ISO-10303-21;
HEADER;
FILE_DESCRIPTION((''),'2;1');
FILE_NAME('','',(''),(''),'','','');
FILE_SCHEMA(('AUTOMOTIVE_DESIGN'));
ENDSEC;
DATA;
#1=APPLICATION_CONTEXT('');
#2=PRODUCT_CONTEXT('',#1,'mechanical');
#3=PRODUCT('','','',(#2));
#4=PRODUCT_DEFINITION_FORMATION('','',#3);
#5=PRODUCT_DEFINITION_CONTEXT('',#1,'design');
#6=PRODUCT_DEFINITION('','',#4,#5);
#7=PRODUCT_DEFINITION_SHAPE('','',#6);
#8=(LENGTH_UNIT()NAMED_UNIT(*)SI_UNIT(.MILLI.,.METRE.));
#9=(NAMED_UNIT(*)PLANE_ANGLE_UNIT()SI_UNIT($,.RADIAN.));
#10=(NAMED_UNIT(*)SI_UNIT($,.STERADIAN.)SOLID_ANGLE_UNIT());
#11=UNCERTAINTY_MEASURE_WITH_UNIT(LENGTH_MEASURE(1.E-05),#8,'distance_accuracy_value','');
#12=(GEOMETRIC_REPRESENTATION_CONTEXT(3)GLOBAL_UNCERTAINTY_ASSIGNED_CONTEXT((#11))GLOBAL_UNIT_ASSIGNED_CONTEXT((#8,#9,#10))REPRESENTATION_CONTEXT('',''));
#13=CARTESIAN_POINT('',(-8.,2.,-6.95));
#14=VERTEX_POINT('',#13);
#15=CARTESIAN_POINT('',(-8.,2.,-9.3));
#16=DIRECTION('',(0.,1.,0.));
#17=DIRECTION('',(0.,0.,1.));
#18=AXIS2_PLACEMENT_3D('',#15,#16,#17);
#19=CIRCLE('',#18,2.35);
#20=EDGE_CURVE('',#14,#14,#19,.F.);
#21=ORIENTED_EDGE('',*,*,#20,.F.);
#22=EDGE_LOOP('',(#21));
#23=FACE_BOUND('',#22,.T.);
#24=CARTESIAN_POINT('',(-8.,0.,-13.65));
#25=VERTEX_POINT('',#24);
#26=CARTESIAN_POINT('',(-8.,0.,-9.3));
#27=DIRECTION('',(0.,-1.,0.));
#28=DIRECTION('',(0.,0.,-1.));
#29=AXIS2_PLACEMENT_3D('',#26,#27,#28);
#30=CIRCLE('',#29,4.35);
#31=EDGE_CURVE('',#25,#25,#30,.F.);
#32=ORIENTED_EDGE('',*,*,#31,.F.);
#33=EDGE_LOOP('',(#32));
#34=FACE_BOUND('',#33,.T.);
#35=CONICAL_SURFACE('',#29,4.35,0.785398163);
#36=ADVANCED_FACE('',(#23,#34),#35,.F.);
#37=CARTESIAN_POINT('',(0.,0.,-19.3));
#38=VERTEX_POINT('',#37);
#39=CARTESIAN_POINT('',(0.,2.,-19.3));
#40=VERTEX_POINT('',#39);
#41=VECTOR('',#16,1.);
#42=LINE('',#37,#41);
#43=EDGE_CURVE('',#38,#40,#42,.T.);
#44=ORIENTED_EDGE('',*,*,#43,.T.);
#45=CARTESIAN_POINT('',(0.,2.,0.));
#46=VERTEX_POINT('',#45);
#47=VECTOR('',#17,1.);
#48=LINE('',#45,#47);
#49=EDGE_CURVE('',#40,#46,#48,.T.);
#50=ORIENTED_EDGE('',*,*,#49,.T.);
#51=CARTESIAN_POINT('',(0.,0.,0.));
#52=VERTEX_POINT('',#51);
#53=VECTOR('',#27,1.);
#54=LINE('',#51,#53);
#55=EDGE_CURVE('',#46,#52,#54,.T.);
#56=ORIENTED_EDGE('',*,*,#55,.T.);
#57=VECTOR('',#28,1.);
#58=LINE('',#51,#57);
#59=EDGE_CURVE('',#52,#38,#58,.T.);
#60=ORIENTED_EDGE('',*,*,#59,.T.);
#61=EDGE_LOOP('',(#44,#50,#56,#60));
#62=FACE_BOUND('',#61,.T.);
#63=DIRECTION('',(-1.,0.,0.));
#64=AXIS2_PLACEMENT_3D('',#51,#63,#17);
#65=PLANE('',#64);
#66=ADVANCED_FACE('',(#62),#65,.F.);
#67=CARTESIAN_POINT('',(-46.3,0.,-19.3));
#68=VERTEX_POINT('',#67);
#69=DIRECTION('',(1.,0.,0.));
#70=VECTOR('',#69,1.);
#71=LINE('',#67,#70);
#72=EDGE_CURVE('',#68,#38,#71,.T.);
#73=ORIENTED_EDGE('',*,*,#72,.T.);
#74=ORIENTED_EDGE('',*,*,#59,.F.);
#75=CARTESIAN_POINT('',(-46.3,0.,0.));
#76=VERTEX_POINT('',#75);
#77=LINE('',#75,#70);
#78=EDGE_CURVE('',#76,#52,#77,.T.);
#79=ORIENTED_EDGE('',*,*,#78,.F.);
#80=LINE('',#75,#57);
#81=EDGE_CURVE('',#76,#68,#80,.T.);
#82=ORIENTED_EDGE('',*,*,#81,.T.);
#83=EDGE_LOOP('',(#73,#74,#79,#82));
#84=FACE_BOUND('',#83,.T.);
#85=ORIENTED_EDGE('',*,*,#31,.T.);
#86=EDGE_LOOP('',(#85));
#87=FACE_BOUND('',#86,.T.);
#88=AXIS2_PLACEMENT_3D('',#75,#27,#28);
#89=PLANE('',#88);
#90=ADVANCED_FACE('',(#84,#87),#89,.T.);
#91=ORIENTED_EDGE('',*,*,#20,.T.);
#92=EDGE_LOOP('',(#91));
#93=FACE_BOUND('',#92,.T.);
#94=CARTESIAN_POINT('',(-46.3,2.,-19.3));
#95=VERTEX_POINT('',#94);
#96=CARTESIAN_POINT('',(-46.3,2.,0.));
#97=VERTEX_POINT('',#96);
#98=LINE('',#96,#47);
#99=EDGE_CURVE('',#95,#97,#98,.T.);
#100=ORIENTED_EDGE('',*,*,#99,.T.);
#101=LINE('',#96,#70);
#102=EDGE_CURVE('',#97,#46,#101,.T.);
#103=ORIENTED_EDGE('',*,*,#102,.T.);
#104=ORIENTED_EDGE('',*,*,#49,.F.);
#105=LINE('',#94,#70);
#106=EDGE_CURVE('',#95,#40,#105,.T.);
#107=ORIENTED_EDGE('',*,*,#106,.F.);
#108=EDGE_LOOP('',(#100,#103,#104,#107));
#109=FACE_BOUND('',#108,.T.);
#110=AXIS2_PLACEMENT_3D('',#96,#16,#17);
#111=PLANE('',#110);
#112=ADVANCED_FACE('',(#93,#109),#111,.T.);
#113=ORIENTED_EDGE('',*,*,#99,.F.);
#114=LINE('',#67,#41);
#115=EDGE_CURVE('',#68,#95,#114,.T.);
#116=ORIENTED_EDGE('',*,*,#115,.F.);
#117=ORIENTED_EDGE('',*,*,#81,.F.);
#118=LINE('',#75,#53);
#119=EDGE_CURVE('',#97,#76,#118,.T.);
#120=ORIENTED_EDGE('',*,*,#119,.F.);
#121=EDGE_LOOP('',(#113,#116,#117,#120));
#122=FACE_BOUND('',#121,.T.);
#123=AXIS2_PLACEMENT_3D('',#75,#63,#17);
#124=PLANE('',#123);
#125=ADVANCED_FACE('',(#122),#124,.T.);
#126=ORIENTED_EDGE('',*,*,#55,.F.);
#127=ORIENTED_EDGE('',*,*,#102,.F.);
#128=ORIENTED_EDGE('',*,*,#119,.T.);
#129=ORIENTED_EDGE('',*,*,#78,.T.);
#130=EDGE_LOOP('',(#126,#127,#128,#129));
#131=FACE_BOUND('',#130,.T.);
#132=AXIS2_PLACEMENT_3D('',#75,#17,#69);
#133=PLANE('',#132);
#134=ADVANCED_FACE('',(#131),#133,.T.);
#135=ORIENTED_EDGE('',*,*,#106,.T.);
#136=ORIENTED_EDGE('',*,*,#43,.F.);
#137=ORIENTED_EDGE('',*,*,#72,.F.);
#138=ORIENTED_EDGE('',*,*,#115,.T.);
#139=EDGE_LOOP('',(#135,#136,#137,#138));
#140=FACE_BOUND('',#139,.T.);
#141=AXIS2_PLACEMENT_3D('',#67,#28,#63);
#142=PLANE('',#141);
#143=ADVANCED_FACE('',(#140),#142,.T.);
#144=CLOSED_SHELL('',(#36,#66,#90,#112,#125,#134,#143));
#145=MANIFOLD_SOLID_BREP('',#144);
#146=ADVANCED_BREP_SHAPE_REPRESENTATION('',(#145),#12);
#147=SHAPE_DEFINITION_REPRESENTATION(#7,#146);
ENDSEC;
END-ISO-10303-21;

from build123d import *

# Parameters (mm, degrees)
SKETCH_1_W             = 19.3
SKETCH_1_H             = 2
SM_BASE_FLANGE_1_DEPTH = 46.3
SKETCH_7_R             = 2.3
CUT_EXTRUDE_2_DEPTH    = 51.201394403
CHAMFER_2_SIZE         = 2.05


# Sheet-metal steps are written as plain solids
with BuildPart() as part:
    # Sketch 1 → Базовая кромка1 (new body)
    with BuildSketch(Plane(origin=(0, 0, 0), x_dir=(0, 0, -1), z_dir=(1, 0, 0))):
        with Locations((9.65, 1)):
            Rectangle(SKETCH_1_W, SKETCH_1_H)
    extrude(amount=-SM_BASE_FLANGE_1_DEPTH)

    # Эскиз7 → Вырез-Вытянуть2 (cut, through all)
    with BuildSketch(Plane(origin=(0, 2, 0), x_dir=(1, 0, 0), z_dir=(0, 1, 0))):
        with Locations(Location((-8, 9.3, 0), (0, 0, 270))):
            Circle(SKETCH_7_R)
    extrude(amount=-CUT_EXTRUDE_2_DEPTH, mode=Mode.SUBTRACT)

    # Фаска2
    # the kernel refuses this chamfer: 2.05 mm, written as the material it takes off along each edge
    with BuildSketch(Plane(origin=(-8, 0, -9.3), x_dir=(0, 0, 1), z_dir=(-1, 0, 0))) as chamfer_2_piece_1:
        Polygon((2.3 + CHAMFER_2_SIZE, 0), (2.3, CHAMFER_2_SIZE), (2.3, 0), align=None)
    revolve(axis=Axis((-8, 0, -9.3), (0, 1, 0)), mode=Mode.SUBTRACT)


solid = part.part
